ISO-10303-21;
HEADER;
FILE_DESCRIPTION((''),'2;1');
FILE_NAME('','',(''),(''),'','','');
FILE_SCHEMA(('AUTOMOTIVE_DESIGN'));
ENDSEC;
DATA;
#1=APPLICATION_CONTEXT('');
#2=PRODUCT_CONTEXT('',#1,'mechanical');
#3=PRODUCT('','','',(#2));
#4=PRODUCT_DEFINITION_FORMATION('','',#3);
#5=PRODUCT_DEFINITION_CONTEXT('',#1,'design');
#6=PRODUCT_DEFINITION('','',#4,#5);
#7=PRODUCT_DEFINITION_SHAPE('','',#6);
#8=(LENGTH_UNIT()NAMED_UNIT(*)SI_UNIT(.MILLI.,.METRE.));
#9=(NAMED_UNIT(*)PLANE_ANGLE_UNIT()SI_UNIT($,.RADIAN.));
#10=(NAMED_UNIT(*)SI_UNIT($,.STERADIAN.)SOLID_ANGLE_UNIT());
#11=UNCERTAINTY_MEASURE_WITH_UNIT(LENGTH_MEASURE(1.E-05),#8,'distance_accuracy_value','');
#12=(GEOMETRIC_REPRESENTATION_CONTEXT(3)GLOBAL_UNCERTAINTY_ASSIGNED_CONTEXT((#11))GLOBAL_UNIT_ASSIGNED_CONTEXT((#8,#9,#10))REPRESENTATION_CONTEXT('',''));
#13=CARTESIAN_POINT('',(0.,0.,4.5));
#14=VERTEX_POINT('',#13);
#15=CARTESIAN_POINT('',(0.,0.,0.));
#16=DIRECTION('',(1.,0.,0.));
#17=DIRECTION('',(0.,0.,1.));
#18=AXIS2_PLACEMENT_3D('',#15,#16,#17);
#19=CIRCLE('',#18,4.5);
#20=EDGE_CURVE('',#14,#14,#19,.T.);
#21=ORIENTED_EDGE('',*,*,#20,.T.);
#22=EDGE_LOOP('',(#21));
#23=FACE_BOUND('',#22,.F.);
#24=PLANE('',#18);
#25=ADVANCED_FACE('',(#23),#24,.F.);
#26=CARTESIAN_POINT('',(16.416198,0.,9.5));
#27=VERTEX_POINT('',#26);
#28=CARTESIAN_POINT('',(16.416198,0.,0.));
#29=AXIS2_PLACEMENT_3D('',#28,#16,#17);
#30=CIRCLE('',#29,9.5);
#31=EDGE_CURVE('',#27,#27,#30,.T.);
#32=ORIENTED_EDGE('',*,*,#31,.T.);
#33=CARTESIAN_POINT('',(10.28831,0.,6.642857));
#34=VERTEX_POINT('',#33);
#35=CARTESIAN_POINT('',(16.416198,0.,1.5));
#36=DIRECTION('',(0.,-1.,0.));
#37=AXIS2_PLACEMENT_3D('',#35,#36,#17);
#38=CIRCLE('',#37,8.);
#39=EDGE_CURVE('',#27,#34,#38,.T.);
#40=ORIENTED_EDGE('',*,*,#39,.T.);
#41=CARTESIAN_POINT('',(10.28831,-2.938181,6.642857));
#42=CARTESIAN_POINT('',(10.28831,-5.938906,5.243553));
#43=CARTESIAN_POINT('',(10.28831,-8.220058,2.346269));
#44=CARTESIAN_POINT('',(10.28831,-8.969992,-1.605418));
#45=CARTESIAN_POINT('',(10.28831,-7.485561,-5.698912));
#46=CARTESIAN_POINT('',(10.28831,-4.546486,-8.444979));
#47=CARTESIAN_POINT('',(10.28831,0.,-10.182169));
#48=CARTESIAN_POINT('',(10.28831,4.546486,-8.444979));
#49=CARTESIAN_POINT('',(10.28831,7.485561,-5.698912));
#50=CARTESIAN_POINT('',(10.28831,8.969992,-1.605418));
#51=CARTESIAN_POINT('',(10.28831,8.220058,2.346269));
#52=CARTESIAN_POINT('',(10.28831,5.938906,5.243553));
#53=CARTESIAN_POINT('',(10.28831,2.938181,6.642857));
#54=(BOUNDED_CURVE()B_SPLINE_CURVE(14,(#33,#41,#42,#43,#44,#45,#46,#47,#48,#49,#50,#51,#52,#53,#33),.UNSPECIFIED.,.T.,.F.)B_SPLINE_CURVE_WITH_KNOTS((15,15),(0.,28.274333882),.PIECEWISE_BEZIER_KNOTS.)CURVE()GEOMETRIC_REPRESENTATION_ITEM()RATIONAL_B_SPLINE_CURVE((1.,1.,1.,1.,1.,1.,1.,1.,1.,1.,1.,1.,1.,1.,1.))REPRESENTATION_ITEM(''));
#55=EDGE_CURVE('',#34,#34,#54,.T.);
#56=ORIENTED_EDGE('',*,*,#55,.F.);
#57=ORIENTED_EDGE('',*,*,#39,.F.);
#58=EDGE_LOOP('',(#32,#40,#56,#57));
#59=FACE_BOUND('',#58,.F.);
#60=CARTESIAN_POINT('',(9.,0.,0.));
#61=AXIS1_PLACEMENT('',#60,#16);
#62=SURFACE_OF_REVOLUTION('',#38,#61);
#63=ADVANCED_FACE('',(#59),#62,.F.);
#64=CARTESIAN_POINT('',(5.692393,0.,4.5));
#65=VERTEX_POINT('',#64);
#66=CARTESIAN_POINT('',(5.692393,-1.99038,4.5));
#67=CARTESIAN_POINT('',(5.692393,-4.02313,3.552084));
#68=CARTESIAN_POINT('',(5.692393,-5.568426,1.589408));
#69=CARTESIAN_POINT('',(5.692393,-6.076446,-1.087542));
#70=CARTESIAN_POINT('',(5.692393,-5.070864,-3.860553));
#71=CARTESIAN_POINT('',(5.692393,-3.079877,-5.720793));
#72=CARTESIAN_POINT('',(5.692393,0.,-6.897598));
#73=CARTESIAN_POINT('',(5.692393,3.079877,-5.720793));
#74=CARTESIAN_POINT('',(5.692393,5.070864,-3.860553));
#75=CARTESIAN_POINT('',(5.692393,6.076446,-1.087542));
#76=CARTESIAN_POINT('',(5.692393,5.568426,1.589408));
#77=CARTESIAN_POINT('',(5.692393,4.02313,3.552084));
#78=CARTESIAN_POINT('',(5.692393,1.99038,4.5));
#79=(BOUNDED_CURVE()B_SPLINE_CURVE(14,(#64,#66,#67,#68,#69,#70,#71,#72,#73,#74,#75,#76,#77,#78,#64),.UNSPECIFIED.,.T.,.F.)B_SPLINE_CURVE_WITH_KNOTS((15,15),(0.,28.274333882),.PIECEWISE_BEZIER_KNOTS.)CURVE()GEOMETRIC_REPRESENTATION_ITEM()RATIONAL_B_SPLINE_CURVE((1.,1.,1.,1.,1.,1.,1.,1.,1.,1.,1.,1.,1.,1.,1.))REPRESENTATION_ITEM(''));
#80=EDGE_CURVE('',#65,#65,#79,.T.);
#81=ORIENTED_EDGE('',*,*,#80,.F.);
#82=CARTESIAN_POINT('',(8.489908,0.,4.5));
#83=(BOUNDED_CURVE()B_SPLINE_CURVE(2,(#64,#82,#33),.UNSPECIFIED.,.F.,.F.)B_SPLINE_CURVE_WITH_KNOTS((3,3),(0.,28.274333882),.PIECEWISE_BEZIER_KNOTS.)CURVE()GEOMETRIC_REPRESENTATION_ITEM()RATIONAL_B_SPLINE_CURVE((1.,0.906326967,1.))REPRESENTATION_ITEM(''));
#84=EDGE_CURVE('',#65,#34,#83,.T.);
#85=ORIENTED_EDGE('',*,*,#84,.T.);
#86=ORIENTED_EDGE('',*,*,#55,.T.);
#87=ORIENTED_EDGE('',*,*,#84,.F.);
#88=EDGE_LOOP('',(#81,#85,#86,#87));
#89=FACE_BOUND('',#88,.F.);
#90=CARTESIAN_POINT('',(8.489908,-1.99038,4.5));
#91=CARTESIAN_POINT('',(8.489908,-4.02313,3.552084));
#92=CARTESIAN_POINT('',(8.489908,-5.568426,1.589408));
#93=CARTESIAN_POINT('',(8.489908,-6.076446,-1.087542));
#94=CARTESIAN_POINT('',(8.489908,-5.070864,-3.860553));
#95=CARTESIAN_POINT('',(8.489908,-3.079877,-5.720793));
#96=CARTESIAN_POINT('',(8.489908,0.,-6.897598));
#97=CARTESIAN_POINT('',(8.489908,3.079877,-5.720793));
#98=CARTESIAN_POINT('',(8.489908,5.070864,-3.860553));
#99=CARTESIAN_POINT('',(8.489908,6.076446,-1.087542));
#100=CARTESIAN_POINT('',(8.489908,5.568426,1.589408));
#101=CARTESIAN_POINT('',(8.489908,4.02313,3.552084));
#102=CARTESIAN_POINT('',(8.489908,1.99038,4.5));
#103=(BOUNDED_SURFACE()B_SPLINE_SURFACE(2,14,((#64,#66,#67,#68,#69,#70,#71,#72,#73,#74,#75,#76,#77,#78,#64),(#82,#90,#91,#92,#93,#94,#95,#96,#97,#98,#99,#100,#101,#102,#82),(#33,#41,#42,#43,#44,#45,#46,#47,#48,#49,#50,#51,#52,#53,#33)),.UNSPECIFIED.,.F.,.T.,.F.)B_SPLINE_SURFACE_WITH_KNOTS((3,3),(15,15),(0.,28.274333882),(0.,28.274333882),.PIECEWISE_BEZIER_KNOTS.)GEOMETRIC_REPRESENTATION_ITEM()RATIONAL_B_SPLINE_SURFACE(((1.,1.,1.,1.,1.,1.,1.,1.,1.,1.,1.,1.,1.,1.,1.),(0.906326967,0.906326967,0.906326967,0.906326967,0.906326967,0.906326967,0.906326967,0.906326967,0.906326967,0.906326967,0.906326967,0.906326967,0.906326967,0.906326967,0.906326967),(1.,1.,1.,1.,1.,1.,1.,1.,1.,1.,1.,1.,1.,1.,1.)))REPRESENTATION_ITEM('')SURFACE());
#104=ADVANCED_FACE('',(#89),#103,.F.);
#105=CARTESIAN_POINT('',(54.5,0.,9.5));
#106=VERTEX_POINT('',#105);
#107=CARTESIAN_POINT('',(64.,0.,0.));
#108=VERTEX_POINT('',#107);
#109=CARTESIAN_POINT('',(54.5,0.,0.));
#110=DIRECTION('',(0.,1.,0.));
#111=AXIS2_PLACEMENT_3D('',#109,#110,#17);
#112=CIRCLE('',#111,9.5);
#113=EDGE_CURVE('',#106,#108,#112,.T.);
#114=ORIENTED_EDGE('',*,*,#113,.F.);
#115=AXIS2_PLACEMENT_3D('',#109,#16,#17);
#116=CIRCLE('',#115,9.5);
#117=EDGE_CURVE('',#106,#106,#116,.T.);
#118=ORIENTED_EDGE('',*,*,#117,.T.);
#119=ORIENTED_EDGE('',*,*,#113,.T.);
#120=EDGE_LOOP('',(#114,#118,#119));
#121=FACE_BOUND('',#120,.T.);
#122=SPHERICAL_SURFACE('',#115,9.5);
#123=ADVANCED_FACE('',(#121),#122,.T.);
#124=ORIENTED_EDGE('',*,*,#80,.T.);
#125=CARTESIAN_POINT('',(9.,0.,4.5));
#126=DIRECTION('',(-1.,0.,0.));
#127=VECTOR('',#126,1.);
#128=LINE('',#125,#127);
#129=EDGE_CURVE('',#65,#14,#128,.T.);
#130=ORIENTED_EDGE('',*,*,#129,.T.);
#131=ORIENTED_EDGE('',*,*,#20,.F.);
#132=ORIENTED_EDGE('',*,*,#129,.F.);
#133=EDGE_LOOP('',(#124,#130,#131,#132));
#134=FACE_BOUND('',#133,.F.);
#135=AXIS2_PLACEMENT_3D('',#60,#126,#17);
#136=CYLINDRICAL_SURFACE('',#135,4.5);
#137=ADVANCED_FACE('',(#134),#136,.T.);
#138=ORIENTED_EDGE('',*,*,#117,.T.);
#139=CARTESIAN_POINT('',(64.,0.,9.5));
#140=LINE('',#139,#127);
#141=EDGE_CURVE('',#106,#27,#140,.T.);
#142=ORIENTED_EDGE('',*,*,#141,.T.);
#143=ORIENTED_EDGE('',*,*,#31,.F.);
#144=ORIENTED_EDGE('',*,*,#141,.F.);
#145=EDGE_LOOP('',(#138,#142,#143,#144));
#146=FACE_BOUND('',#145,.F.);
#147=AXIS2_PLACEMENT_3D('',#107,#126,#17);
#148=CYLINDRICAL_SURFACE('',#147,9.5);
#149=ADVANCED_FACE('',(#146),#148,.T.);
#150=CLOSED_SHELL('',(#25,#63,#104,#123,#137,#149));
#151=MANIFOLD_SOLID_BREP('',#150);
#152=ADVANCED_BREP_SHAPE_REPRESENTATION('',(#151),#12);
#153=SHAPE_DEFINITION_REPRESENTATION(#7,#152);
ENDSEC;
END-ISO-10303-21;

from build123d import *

# Parameters (mm, degrees)
F3_R = 6
F4_R = 9.5


# Not quite as in the source:
# - a fillet or chamfer that OpenCascade refuses, or shapes differently, is made with other operations: its cross-section is extruded or revolved along the edge and cut away or added


with BuildPart() as f1:
    # F0 (on Front) → F1 (revolve)
    with BuildSketch(Plane.XZ):
        Polygon((0, 4.5), (0, 0), (64, 0), (64, 9.5), (9, 9.5), (9, 4.5), align=None)
    revolve(axis=Axis((32, 0, 0), (1, 0, 0)))

    # F2: fillet of radius 8 on 1 edges, made by hand

    # F2_s1 → F2_t2 (revolve, cut)
    with BuildSketch(Plane.XZ):
        with BuildLine():
            ThreePointArc((16.4161984871, 9.5), (11.9440625321, 8.1332495807), (9, 4.5))
            Line((9, 4.5), (9, 9.5))
            Line((9, 9.5), (16.4161984871, 9.5))
        make_face()
    revolve(axis=Axis((9, 0, 0), (1, 0, 0)), mode=Mode.SUBTRACT)

    # F3
    f3_edges = [f1.edges().sort_by_distance(p)[0] for p in [
        (9, 0, -4.5),
    ]]
    fillet(f3_edges, radius=F3_R)

    # F4
    f4_edges = [f1.edges().sort_by_distance(p)[0] for p in [
        (64, 0, -9.5),
    ]]
    fillet(f4_edges, radius=F4_R)


solid = f1.part
